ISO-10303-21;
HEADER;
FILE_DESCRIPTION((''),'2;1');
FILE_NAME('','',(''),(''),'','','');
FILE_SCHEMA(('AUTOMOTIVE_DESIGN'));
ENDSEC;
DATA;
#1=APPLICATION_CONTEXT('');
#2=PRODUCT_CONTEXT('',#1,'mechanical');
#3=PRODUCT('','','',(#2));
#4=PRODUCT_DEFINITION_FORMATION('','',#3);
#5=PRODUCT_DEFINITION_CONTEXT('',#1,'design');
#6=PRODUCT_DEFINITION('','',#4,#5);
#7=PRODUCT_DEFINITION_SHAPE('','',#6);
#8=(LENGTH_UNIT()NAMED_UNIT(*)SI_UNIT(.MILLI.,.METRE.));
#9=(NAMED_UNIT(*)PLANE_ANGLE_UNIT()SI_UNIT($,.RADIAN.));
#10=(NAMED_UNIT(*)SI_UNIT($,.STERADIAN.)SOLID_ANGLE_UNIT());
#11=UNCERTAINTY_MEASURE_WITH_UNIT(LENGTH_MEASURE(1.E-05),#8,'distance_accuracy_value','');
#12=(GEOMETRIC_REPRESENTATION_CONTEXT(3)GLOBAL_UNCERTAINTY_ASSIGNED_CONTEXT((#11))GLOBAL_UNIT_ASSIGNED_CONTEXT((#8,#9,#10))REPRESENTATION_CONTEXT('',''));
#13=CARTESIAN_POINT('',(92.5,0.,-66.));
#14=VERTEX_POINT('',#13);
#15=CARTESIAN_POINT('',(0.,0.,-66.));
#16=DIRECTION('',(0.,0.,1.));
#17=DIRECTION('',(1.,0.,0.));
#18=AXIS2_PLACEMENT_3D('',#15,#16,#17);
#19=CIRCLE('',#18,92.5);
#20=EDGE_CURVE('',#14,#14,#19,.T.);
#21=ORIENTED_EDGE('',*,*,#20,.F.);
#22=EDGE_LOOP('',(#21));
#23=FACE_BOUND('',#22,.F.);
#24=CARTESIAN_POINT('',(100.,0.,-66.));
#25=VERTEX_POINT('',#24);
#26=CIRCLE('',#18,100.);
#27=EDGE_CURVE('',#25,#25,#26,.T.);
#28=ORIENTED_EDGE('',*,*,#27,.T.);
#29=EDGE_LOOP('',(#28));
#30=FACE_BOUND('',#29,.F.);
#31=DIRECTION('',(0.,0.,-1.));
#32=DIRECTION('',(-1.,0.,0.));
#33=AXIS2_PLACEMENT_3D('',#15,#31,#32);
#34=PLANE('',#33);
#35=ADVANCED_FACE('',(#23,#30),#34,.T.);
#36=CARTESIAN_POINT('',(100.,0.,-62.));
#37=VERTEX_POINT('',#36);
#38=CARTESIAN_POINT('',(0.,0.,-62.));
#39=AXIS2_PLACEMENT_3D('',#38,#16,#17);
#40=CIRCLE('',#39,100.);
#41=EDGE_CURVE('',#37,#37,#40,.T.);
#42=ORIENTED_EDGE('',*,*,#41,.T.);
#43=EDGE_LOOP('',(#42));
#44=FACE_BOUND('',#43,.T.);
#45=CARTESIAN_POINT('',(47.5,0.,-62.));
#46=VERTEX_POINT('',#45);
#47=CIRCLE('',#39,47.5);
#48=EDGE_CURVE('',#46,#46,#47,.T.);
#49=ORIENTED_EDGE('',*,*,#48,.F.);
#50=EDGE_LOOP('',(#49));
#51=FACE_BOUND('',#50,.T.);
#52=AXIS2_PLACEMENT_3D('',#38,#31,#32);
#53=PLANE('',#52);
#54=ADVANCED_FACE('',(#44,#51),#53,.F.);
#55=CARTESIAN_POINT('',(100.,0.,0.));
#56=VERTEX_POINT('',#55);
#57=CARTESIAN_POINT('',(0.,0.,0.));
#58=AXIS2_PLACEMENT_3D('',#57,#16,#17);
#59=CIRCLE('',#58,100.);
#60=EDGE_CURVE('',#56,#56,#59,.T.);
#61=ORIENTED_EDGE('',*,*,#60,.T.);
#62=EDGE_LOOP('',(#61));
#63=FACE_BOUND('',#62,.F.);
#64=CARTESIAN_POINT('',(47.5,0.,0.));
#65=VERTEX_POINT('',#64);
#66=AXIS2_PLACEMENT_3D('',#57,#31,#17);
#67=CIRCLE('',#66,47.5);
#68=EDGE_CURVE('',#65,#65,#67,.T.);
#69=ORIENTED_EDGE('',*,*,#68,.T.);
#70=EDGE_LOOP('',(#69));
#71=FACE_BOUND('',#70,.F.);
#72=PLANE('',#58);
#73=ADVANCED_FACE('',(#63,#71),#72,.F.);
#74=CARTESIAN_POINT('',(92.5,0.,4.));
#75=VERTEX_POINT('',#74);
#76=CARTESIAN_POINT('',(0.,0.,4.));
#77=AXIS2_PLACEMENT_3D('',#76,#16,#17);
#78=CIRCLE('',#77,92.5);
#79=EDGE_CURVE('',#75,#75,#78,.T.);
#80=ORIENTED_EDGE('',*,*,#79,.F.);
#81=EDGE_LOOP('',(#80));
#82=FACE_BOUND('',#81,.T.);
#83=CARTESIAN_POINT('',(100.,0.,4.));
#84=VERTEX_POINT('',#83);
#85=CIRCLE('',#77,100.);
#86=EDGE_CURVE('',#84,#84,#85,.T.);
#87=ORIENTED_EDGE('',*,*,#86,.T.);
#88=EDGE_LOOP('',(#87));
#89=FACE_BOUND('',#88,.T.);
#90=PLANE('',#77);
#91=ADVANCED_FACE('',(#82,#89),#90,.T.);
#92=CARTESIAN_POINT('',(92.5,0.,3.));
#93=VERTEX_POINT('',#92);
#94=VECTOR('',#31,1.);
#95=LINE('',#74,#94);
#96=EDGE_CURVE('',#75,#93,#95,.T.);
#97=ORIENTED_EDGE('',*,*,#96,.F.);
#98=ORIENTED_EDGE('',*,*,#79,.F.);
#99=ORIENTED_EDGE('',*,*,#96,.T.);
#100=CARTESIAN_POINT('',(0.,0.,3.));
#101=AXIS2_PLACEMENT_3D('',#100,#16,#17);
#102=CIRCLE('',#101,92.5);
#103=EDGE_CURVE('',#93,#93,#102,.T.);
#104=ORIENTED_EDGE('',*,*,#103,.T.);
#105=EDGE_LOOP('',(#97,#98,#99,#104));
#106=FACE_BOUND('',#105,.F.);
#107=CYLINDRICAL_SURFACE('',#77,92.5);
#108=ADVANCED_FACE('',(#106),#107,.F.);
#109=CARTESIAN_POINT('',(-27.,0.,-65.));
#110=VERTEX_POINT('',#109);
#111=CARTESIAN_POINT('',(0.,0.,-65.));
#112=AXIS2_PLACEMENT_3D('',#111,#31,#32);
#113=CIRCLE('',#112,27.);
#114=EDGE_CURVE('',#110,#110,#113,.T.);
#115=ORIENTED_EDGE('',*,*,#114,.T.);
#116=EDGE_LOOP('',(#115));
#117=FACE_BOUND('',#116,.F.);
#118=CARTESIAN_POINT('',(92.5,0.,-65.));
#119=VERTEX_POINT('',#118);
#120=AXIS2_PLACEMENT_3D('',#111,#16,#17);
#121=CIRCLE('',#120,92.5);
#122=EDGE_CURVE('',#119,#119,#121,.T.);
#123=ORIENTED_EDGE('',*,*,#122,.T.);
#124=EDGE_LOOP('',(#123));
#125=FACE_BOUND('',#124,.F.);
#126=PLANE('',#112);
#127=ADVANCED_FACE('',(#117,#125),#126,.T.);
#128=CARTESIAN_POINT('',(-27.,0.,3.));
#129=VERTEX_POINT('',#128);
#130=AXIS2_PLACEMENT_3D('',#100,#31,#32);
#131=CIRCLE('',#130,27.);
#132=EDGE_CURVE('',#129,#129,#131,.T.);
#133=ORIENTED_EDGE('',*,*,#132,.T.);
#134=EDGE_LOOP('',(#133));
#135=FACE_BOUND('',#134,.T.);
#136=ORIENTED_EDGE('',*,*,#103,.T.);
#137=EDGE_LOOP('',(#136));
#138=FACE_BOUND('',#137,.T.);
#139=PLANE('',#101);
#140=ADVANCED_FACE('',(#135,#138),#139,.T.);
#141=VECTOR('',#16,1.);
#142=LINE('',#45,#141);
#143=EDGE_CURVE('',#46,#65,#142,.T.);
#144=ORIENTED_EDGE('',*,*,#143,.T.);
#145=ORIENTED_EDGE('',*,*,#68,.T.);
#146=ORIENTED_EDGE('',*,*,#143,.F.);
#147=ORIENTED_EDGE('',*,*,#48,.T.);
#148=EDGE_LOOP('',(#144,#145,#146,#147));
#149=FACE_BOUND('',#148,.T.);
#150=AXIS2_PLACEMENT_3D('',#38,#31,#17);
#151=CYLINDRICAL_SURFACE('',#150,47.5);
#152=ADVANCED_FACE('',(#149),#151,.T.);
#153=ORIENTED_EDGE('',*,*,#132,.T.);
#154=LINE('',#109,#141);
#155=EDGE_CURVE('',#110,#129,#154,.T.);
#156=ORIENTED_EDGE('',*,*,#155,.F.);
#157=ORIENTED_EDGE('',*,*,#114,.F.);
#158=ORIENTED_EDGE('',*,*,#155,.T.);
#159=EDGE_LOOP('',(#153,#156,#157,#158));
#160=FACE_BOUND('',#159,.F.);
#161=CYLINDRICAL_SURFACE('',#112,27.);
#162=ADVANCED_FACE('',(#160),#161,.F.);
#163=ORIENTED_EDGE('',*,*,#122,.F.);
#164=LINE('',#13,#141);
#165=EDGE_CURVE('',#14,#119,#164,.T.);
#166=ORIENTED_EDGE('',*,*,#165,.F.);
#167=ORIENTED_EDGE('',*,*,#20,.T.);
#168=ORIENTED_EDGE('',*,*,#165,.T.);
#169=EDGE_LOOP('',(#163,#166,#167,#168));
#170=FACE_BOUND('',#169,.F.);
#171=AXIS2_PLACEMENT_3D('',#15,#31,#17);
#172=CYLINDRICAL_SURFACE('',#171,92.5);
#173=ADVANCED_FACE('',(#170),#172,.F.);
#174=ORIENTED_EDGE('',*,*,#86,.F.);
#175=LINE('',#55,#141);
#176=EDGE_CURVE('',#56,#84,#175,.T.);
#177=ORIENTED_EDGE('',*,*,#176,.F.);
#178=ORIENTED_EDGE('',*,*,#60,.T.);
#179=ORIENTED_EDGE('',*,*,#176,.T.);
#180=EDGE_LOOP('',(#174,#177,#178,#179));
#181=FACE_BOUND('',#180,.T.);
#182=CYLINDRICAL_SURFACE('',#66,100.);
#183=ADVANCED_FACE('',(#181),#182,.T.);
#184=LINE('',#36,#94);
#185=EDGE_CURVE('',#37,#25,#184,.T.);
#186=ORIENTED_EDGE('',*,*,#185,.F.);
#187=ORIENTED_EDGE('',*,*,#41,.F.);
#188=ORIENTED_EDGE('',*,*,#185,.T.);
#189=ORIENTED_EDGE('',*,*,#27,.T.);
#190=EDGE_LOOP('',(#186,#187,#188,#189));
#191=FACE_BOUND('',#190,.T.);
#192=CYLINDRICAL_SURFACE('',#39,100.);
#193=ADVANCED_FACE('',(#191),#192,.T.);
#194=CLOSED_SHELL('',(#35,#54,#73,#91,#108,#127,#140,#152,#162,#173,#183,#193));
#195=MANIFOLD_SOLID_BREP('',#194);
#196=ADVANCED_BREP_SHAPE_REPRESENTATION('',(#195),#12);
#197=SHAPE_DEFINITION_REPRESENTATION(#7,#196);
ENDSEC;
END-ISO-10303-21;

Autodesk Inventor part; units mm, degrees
ref_plane "YZ Plane" through (0, 0, 0) normal (1, 0, 0) x (0, 1, 0)
ref_plane "XZ Plane" through (0, 0, 0) normal (0, 1, 0) x (-1, 0, 0)
sketch "Sketch11" plane through (0, 0, 0) normal (0, 0, 1) x (1, 0, 0)
  circle A0 centre (0, 0) radius 100
  dimension "d39" = 200
extrude "Extrusion10" add sketch "Sketch11" along normal blind 4
sketch "Sketch12" plane through (0, 0, 4) normal (0, 0, 1) x (1, 0, 0)
  circle A0 centre (0, 0) radius 100 projected
  circle A1 centre (0, 0) radius 92.5
  dimension "d42" = 185
extrude "Extrusion11" cut sketch "Sketch12" against normal blind 1 contours A1
ref_plane "Work Plane1" through (0, 0, -31) normal (0, 0, -1) x (-1, 0, 0)
mirror "Mirror1" about plane through (0, 0, -31) normal (0, 0, -1)
sketch "Sketch14" plane through (0, 0, -62) normal (0, 0, 1) x (1, 0, 0)
  circle A0 centre (0, 0) radius 100 projected
  circle A1 centre (0, 0) radius 47.5
  dimension "d46" = 95
extrude "Extrusion12" add sketch "Sketch14" along normal up to next contours A1
sketch "Sketch15" plane through (0, 0, -65) normal (0, 0, -1) x (-1, 0, 0)
  circle A0 centre (0, 0) radius 92.5 projected
  circle A1 centre (0, 0) radius 27
  dimension "d50" = 54
extrude "Extrusion13" cut sketch "Sketch15" against normal up to surface (68 mm away) contours A1
properties part number "SpoolFilamentToyBuilder" material "ABS Plastic"
